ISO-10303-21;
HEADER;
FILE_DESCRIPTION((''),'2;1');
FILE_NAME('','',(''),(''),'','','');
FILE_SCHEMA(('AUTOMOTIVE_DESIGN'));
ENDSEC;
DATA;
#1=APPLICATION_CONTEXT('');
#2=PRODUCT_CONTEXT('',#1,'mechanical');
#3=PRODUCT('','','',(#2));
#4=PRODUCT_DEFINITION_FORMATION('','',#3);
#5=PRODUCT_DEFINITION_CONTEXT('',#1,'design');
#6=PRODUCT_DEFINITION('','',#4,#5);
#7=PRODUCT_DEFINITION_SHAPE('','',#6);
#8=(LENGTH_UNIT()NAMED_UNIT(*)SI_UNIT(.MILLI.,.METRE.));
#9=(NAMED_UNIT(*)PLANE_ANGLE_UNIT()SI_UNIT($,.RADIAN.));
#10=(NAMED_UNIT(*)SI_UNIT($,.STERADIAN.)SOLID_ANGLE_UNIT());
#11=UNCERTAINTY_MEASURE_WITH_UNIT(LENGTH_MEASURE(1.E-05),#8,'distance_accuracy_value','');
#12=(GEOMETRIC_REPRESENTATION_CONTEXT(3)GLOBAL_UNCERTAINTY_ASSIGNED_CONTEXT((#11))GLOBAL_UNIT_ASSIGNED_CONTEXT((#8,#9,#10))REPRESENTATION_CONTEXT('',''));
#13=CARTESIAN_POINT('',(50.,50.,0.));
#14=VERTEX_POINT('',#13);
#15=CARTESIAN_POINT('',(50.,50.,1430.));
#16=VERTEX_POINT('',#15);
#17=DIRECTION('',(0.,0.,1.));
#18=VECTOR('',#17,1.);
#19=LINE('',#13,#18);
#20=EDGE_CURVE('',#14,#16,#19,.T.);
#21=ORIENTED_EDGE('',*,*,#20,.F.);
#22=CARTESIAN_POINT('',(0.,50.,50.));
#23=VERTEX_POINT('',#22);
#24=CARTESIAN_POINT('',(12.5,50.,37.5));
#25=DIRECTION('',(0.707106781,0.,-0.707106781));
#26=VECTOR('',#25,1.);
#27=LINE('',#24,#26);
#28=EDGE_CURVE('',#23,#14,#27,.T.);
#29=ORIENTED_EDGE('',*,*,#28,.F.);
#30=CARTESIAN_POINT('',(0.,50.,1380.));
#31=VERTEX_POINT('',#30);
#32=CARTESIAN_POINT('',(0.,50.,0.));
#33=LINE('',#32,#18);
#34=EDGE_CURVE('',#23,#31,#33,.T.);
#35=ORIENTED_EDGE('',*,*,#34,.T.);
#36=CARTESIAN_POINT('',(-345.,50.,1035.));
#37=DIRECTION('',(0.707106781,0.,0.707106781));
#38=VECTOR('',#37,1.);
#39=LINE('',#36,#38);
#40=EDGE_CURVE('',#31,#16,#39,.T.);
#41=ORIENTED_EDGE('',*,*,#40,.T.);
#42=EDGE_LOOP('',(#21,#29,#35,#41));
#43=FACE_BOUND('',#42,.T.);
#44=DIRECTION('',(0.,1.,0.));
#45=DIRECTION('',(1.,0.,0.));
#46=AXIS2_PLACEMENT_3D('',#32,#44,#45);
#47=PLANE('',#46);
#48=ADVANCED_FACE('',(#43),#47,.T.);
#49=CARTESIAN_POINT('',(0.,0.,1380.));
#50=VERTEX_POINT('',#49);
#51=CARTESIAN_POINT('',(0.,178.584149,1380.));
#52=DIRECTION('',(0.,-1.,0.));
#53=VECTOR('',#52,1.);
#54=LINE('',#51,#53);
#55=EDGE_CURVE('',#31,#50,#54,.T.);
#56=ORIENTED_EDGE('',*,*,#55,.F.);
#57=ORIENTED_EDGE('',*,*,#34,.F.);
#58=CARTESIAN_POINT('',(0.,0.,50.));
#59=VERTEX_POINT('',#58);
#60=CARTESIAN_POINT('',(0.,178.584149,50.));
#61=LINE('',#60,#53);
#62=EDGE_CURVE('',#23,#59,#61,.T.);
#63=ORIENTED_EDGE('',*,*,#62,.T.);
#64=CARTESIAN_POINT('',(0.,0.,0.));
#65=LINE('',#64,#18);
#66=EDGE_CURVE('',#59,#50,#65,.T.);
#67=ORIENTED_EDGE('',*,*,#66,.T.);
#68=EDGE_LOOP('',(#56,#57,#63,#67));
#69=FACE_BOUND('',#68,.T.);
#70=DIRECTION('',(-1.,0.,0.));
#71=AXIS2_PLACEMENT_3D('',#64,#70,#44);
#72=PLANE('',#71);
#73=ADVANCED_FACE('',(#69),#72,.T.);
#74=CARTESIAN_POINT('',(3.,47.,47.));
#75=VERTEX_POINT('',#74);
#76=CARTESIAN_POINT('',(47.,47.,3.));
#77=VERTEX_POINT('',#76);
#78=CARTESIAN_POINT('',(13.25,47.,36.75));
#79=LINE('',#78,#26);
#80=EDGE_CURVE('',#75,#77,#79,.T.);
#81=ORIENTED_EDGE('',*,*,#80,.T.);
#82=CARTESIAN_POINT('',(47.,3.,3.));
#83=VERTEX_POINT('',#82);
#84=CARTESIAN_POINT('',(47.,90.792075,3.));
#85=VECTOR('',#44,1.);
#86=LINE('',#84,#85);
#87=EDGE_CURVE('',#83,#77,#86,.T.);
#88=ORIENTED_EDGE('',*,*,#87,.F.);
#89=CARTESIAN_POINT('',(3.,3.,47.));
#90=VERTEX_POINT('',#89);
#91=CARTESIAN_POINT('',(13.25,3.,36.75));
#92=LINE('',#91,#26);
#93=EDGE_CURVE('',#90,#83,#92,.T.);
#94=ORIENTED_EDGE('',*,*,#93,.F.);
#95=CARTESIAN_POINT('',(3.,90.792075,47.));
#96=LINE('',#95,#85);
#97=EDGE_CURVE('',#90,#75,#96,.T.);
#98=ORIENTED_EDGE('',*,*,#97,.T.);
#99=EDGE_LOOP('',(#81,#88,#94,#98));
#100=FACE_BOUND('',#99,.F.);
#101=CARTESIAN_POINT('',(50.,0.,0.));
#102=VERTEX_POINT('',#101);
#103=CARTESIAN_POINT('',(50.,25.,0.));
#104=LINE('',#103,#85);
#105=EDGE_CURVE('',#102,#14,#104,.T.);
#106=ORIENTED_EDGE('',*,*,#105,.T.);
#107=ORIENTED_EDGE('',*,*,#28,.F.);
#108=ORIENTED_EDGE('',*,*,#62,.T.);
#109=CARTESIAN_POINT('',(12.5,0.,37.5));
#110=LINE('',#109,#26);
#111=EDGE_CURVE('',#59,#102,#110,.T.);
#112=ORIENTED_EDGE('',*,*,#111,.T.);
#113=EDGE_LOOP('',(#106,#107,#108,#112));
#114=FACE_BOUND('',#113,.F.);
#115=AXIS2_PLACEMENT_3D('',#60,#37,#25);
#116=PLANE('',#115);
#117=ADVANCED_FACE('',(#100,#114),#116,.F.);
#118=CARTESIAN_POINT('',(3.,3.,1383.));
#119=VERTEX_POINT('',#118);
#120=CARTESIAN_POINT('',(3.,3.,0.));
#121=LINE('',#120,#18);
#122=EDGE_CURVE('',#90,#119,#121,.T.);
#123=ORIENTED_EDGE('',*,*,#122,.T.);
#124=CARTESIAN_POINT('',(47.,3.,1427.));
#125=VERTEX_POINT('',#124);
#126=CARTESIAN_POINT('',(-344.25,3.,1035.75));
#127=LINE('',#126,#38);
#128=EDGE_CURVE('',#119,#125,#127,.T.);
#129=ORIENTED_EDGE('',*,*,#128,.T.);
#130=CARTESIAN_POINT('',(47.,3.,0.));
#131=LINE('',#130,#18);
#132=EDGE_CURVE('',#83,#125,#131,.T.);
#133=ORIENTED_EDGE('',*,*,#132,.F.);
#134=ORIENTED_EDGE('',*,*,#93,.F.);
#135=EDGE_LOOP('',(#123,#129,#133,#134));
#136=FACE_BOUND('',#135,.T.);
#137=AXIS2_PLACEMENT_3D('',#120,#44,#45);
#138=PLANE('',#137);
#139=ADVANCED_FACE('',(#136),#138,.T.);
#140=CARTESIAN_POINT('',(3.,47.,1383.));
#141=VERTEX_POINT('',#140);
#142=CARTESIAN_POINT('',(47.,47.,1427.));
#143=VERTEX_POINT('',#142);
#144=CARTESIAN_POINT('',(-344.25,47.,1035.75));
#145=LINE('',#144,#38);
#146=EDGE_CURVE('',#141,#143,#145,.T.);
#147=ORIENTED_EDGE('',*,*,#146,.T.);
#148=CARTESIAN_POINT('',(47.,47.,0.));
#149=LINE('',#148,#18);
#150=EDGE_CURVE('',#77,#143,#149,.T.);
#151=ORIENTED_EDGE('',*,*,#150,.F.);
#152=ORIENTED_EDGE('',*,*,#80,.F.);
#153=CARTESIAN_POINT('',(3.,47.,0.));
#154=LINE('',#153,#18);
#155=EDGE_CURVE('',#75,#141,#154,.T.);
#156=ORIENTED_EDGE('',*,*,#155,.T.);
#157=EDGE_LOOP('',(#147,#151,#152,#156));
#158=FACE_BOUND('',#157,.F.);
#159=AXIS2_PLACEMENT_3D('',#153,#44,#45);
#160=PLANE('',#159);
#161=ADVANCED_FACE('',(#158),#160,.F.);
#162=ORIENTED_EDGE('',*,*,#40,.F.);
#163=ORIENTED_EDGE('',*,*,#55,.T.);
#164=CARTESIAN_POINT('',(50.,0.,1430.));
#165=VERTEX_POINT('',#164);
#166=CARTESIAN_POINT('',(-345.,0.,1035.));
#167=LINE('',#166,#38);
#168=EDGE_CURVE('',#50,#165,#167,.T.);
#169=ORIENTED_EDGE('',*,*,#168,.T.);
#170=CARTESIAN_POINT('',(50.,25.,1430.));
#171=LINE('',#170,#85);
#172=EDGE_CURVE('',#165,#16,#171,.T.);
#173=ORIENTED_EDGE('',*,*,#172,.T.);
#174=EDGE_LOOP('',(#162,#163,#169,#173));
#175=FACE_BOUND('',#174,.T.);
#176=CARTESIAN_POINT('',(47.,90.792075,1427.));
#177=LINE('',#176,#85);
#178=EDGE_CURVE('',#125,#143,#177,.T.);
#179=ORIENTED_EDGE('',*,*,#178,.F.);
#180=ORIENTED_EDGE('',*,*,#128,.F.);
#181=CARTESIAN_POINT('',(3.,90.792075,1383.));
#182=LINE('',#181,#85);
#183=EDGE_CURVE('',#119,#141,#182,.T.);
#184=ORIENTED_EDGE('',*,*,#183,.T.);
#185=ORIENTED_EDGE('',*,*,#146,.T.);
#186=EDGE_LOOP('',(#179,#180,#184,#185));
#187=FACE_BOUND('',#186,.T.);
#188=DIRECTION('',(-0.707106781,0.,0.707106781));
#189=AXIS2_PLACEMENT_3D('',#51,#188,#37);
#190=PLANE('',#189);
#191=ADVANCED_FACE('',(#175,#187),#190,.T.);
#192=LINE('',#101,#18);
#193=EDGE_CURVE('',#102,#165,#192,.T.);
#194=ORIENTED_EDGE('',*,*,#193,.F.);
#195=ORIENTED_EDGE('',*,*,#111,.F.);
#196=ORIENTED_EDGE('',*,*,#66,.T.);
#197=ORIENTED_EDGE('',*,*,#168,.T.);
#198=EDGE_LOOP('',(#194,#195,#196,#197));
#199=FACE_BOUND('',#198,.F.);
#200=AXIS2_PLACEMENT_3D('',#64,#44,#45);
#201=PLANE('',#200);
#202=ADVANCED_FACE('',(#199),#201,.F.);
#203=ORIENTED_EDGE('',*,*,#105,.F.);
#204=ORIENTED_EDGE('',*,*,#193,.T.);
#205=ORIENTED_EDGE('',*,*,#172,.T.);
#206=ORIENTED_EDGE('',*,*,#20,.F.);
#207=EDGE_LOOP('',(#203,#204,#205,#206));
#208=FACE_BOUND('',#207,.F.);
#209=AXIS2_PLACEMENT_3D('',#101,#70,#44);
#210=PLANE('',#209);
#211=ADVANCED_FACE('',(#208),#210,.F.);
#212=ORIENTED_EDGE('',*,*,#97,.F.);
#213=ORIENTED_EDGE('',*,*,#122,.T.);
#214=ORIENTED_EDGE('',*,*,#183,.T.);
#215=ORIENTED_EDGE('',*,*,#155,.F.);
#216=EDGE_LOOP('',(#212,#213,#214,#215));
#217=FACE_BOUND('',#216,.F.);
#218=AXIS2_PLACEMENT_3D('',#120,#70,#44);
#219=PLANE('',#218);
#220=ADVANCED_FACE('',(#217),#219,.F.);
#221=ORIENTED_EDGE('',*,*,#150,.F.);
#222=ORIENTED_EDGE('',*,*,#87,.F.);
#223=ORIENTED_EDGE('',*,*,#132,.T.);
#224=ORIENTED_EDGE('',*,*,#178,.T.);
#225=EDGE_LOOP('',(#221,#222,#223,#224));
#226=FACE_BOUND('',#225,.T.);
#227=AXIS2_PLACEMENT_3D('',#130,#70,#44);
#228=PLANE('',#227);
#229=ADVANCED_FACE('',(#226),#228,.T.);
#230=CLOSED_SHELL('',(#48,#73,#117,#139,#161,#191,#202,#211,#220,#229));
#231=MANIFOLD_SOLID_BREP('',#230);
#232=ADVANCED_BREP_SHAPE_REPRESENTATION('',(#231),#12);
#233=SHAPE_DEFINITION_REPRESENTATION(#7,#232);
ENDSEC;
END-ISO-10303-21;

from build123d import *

# Parameters (mm, degrees)
F0_W        = 50
F0_H        = 50
F0_W_2      = 44
F0_H_2      = 44
F1_DEPTH    = 1430
F2_T1_DEPTH = 307.1682987966


# Not quite as in the source:
# - a fillet or chamfer that OpenCascade refuses, or shapes differently, is made with other operations: its cross-section is extruded or revolved along the edge and cut away or added


with BuildPart() as f1:
    # F0 (on Top) → F1 (new body)
    with BuildSketch(Plane.XY):
        with Locations((25, 25)):
            Rectangle(F0_W, F0_H)
        with Locations((25, 25)):
            Rectangle(F0_W_2, F0_H_2, mode=Mode.SUBTRACT)
    extrude(amount=F1_DEPTH)

    # F2: chamfer of 50 on 2 edges, made by hand

    # F2_s2 → F2_t1 (cut)
    with BuildSketch(Plane.XZ.offset(-178.5841493983)):
        Polygon((0, 50), (50, 0), (0, 0), align=None)
        Polygon((0, 1380), (50, 1430), (0, 1430), align=None)
    extrude(amount=F2_T1_DEPTH, mode=Mode.SUBTRACT)


solid = f1.part
